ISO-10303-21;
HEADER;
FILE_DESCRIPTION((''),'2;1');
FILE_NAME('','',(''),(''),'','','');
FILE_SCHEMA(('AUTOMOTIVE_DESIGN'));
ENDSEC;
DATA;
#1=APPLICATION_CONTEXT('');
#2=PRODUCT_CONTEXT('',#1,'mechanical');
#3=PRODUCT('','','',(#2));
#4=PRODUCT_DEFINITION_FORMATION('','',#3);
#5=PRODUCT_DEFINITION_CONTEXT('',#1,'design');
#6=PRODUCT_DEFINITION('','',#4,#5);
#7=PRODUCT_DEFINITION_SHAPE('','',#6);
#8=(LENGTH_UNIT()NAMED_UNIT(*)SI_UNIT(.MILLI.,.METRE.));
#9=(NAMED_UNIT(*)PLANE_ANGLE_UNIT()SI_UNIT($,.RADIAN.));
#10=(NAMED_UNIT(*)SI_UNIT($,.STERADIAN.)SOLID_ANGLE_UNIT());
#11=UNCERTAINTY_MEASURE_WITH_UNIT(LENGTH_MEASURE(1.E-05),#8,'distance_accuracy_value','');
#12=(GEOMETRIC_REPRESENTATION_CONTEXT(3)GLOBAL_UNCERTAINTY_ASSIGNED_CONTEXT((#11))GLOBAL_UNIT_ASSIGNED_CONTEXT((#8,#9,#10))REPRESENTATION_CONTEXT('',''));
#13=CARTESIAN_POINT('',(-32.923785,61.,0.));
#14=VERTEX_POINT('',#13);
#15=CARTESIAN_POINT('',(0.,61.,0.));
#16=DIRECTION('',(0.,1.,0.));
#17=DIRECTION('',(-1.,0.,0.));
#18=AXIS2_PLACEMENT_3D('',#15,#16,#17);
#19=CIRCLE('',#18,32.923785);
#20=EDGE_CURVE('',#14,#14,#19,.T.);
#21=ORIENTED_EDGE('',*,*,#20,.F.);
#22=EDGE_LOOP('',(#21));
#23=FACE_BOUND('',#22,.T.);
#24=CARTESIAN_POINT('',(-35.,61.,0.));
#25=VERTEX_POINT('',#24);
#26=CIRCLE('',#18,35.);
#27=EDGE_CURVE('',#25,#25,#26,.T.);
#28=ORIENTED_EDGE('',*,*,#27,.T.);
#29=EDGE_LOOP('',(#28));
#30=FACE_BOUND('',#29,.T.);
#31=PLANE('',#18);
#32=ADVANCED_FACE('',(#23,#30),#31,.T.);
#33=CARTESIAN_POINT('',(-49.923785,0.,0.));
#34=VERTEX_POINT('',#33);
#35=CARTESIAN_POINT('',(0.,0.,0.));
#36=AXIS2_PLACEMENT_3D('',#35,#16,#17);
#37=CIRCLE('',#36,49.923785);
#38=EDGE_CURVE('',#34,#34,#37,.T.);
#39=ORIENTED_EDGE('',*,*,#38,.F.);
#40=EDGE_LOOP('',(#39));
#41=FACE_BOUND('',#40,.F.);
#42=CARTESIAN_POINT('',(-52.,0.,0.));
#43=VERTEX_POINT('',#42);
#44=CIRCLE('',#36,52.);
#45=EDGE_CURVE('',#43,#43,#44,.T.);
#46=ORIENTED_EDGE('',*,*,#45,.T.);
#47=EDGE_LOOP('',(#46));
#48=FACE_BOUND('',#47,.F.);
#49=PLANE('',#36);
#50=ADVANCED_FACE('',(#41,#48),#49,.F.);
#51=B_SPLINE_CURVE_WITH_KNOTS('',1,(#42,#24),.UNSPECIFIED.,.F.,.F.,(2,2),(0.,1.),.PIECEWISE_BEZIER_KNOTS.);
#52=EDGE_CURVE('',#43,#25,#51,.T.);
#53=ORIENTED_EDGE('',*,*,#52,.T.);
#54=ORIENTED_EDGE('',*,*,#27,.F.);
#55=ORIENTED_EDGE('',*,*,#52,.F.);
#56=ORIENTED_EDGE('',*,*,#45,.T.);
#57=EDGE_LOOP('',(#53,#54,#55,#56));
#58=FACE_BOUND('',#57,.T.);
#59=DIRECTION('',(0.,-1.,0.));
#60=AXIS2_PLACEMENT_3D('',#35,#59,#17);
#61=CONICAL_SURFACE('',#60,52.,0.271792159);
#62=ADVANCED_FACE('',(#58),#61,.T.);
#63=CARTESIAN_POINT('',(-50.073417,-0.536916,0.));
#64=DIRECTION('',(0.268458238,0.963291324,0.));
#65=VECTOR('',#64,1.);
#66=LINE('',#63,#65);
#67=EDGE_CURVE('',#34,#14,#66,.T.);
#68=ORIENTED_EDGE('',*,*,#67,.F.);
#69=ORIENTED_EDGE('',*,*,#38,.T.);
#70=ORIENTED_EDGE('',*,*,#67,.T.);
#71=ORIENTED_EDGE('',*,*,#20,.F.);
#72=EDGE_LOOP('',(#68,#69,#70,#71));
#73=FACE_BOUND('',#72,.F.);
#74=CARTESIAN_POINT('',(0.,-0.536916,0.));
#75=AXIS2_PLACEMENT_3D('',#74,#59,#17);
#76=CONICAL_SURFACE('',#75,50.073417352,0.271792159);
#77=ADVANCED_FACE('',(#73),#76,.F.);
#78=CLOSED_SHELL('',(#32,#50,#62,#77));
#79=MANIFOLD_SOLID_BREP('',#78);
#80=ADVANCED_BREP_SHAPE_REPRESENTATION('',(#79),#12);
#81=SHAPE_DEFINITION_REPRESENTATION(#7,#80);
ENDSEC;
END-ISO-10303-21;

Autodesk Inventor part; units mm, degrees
ref_plane "YZ Plane" through (0, 0, 0) normal (1, 0, 0) x (0, 1, 0)
ref_plane "XY Plane" through (0, 0, 0) normal (0, 0, 1) x (1, 0, 0)
sketch "Szkic6" plane through (0, 0, 0) normal (0, 1, 0) x (-1, 0, 0)
  circle A0 centre (0, 0) radius 52
  dimension "d33" = 104
ref_plane "Płaszczyzna konstrukcyjna1" through (0, 61, 0) normal (0, 1, 0) x (-1, 0, 0)
sketch "Szkic7" plane through (0, 61, 0) normal (0, 1, 0) x (-1, 0, 0)
  circle A0 centre (0, 0) radius 35
  dimension "d35" = 70
loft "Wyciągnięcie złożone1" add profiles "Szkic6", "Szkic7"
shell "Skorupa1" thickness 2 removed faces 2 at (1.9985, 61, 11.019) at (-18.5271, 0, 25.061)
equation "\"d33\" = OD1"
equation "\"d35\" = OD2"
equation "\"d52\" = THK"
equation "\"SzerokośćGięciaPodcięcia\" = Grubość"
equation "\"RozmiarPodcięciaNarożnika\" = 4 * Grubość"
equation "\"PromieńPrzejścia\" = PromieńGięcia"
equation "\"Rozmiar_promienia_Jacobiego\" = PromieńGięcia"
equation "\"Wielk_odstępu\" = Grubość"
equation "\"d2\" = PromieńGięcia"
equation "\"d23\" = PromieńGięcia"
equation "\"OD1\" = 104"
equation "\"OD2\" = 70"
equation "\"L\" = 61"
equation "\"THK\" = 2"
equation "\"d34\" = L"
equation "\"Grubość\" = 1.5"
equation "\"PromieńGięcia\" = 3"
properties part number "Redukcja symetryczna Ø104x70x2 L=61" material "304"
